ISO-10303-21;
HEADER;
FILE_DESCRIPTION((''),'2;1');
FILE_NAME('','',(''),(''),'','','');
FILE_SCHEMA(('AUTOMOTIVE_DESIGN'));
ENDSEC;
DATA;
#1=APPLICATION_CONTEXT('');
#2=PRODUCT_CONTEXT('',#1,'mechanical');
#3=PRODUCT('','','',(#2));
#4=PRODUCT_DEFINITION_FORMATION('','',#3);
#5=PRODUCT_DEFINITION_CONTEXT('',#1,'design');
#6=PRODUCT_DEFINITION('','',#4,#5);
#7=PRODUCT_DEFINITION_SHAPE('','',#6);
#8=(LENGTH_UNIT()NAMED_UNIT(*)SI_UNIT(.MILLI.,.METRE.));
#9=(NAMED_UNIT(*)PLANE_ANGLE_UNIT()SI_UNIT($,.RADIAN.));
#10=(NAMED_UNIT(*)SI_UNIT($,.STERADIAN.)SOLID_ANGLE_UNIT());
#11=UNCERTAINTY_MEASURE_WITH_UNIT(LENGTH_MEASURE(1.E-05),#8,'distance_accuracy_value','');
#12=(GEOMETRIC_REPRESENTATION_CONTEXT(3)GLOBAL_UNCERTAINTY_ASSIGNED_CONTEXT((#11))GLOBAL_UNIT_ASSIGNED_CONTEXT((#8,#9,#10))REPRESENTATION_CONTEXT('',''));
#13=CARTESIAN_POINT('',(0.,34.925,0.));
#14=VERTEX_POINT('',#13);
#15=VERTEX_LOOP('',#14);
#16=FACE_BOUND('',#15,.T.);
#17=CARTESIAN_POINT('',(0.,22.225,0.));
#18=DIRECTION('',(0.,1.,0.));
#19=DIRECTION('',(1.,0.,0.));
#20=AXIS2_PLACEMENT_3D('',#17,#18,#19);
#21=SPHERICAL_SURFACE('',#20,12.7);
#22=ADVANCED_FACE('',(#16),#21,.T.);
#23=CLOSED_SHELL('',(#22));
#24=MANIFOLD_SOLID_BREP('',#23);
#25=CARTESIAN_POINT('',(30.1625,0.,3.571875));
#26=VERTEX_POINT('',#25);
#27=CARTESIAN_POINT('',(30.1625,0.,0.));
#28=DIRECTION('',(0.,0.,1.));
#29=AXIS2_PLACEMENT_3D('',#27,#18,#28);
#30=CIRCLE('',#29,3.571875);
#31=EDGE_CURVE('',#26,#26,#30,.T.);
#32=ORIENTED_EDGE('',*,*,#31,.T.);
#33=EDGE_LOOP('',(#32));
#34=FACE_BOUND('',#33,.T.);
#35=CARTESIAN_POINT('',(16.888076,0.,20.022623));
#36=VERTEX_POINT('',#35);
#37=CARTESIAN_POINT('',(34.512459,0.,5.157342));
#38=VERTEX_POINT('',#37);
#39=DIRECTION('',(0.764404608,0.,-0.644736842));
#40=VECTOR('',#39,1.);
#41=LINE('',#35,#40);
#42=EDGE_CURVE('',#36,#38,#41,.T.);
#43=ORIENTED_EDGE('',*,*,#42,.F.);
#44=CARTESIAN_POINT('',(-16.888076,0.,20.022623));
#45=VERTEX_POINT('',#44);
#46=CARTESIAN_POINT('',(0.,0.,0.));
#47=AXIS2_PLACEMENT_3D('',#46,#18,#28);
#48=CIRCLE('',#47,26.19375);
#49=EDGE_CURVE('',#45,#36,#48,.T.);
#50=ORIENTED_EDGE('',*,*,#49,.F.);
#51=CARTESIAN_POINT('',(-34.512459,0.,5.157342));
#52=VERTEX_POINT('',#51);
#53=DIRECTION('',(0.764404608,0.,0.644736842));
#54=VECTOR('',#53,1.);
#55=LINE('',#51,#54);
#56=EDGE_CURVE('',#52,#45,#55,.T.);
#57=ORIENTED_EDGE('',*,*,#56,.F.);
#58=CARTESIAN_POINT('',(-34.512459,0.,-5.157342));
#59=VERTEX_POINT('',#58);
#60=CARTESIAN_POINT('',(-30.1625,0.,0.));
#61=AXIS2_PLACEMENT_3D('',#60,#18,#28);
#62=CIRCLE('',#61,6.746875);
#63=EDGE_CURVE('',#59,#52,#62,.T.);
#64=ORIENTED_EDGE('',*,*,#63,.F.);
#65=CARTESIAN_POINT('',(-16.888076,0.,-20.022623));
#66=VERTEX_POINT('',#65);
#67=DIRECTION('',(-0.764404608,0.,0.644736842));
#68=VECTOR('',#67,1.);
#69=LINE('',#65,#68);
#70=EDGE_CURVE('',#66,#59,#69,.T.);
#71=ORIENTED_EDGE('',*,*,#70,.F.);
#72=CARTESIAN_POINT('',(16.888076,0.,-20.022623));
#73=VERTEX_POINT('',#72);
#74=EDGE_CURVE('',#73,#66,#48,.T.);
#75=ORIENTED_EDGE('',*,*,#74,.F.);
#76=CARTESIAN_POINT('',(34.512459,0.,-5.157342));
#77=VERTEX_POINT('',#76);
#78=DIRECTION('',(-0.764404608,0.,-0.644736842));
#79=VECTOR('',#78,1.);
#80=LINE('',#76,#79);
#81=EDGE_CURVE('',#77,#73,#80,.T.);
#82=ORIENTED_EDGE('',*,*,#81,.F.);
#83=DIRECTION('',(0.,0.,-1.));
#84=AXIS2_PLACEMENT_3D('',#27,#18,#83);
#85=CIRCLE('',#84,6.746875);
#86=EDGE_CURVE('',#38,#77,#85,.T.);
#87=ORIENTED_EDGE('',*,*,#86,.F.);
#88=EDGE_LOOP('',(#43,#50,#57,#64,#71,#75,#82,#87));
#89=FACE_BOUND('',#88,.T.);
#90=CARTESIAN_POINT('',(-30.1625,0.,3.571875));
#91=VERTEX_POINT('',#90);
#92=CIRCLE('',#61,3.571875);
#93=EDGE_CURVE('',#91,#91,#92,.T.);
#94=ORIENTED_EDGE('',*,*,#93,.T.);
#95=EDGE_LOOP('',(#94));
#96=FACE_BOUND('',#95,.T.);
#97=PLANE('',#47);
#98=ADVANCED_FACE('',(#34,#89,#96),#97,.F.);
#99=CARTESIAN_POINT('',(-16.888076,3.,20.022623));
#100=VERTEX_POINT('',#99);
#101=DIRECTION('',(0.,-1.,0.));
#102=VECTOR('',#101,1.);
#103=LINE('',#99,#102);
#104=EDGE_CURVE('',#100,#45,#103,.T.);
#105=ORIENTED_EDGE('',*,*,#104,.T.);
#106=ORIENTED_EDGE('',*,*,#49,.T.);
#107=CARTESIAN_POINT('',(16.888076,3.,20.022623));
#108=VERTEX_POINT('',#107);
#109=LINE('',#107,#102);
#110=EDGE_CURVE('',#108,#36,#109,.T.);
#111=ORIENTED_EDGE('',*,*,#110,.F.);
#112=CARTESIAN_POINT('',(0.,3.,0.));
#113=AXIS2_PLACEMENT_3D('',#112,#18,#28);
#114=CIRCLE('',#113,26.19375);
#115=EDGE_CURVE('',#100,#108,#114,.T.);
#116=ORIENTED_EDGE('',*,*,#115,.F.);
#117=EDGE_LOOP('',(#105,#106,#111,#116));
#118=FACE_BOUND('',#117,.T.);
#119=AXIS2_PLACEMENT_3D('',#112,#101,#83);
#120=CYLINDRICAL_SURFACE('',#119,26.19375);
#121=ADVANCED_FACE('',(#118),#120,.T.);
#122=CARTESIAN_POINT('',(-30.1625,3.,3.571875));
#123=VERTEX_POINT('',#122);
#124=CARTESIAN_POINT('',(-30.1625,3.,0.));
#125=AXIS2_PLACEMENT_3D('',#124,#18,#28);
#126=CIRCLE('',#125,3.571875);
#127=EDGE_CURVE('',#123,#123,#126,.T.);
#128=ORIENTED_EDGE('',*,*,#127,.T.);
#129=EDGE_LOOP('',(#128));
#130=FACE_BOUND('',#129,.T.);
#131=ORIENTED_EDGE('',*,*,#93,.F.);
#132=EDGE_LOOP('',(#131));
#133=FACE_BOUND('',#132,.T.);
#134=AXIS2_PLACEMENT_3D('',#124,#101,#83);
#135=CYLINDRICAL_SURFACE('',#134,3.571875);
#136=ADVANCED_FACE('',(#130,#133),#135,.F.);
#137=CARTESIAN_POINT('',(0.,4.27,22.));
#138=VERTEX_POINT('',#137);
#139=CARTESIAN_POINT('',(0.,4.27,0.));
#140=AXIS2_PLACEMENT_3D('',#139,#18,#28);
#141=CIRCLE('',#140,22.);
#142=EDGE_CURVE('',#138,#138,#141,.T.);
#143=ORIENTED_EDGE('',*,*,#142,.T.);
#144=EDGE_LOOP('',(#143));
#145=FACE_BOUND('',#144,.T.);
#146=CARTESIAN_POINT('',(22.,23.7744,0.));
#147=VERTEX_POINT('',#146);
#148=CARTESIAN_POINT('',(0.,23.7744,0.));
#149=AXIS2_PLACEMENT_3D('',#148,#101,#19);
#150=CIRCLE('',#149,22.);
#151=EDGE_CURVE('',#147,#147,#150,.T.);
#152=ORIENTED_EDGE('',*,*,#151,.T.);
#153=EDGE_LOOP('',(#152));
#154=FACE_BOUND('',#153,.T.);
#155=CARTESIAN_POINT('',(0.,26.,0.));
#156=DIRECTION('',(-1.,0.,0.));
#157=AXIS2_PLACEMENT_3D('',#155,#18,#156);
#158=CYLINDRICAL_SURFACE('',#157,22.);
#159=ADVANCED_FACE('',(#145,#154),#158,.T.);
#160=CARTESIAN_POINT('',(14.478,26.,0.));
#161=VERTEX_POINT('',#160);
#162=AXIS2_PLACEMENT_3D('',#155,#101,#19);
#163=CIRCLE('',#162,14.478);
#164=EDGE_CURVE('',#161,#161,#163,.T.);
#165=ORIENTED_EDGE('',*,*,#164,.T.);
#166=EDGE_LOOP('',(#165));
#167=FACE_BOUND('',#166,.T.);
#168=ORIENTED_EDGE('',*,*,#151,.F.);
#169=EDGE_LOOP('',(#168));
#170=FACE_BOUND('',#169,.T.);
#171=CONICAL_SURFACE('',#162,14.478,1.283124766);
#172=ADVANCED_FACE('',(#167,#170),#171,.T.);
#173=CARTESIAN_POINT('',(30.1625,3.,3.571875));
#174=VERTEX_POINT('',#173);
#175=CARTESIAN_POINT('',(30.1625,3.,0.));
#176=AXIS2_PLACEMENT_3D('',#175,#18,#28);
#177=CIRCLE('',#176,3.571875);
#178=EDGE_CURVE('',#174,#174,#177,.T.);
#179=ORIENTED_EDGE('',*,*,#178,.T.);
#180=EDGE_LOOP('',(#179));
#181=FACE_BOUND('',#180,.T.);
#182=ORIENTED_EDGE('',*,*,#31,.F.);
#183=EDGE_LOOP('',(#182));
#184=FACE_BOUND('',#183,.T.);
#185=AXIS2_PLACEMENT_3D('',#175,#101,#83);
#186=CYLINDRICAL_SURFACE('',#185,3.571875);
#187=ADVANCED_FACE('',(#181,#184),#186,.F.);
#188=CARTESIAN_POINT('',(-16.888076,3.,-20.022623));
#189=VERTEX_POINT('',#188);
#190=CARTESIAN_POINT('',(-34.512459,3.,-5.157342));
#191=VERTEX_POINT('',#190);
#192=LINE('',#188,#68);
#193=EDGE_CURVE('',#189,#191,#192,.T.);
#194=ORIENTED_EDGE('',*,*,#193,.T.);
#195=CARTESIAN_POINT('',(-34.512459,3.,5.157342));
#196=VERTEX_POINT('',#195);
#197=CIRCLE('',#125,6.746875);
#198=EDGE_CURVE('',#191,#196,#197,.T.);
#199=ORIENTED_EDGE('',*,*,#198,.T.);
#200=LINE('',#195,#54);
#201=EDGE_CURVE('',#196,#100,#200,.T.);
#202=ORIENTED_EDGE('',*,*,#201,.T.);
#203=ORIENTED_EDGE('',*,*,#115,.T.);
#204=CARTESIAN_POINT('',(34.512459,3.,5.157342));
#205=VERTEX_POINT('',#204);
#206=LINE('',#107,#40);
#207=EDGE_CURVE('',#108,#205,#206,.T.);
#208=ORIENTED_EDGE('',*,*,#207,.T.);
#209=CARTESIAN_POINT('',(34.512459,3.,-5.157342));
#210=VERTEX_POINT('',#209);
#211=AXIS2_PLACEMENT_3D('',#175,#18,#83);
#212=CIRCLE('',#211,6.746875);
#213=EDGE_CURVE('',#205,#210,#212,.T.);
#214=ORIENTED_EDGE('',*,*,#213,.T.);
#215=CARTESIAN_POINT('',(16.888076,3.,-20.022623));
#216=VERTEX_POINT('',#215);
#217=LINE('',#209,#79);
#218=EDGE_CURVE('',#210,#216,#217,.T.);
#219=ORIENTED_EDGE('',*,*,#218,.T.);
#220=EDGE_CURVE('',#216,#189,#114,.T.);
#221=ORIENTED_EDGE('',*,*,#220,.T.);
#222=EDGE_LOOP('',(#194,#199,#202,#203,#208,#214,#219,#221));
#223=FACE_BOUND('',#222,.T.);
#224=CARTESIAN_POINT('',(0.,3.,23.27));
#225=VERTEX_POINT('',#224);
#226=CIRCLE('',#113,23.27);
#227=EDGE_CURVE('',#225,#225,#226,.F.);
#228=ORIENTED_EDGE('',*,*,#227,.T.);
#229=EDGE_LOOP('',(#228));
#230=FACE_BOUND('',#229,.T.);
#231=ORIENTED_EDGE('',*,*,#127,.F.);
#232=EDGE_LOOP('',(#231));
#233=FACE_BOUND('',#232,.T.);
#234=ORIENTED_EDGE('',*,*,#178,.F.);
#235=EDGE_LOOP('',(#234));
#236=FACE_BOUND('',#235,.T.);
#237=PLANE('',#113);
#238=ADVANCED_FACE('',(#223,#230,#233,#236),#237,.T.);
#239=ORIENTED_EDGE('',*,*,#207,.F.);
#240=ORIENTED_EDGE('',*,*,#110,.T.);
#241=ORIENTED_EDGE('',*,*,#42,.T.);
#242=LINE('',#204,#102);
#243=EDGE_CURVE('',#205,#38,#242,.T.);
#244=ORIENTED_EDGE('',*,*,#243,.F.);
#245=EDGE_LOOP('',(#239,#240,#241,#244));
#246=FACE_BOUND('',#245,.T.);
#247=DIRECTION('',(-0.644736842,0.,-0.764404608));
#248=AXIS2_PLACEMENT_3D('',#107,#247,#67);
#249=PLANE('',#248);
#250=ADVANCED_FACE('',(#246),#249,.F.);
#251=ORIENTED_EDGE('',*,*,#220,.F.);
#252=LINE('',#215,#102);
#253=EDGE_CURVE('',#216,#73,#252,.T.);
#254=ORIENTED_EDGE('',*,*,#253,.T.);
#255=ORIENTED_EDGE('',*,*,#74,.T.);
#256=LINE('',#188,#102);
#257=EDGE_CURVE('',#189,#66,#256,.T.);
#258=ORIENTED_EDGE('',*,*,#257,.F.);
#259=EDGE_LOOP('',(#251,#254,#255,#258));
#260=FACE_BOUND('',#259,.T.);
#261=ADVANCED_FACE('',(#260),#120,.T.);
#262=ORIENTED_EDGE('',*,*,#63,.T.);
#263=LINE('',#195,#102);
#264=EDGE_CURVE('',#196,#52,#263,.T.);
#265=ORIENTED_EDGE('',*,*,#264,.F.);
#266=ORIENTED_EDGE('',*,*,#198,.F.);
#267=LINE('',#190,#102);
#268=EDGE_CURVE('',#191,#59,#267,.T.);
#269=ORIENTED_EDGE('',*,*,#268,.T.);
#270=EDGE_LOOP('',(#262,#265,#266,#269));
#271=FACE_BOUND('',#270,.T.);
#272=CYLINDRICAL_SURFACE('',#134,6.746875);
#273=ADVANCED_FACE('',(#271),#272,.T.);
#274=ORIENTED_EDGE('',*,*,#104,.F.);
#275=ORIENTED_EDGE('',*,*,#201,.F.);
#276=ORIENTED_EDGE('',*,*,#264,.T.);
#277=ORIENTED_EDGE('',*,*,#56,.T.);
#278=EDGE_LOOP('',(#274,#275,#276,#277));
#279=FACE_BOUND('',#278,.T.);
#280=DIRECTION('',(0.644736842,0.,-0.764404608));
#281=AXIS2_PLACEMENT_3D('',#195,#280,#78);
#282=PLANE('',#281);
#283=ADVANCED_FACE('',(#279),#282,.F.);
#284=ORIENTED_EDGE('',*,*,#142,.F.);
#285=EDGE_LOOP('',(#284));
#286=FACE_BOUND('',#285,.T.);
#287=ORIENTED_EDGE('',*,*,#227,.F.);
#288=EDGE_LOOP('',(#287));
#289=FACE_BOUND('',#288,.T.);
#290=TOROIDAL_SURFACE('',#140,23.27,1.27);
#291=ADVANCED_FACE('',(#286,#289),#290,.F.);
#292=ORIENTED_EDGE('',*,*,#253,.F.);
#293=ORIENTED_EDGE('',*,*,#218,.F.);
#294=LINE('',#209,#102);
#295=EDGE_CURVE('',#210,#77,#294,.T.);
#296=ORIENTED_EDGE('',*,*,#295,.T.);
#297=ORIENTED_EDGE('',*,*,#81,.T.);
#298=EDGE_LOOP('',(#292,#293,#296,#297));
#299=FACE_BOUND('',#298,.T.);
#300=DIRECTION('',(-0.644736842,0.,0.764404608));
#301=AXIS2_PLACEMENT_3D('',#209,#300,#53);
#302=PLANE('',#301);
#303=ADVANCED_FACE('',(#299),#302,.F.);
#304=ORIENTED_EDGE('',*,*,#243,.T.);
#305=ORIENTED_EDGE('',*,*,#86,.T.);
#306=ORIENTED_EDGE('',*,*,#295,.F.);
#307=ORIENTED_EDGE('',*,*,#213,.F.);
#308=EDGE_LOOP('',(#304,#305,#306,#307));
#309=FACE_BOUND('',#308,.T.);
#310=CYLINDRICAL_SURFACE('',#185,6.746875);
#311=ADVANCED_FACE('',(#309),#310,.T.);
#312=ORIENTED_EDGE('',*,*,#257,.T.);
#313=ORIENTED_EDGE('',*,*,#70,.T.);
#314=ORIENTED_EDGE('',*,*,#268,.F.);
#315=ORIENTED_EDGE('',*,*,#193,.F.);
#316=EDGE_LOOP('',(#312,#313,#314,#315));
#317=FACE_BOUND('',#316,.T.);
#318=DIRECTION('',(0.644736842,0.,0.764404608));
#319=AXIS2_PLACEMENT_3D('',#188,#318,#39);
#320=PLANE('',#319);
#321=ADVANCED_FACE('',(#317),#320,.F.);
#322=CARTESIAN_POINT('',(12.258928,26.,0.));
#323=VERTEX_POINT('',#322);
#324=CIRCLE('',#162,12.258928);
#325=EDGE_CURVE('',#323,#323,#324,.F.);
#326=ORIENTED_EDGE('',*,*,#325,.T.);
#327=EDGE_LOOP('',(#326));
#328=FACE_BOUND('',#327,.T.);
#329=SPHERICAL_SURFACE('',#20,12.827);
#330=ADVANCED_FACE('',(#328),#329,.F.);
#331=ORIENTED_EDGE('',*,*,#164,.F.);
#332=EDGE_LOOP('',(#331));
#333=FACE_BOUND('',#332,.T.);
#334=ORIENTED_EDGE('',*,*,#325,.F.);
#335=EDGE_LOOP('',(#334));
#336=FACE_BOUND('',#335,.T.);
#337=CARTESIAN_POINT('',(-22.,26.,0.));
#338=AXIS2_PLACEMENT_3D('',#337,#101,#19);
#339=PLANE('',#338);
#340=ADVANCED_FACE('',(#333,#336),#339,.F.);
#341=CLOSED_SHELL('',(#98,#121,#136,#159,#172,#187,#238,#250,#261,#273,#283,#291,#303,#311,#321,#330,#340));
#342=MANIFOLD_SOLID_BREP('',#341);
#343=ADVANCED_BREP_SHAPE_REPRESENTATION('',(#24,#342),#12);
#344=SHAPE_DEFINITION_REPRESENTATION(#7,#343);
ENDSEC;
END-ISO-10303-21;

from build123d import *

# Parameters (mm, degrees)
SKETCH2_R           = 3.571875
BOSS_EXTRUDE1_DEPTH = 3
SKETCH1_W           = 22
SKETCH1_H           = 26
FILLET1_R           = 1.27


# Read off the part's stored shape, not the designer's step: Move Face1
with BuildPart() as part:
    # Sketch2 → Boss-Extrude1 (new body)
    with BuildSketch(Plane(origin=(0, 0, 0), x_dir=(1, 0, 0), z_dir=(0, 1, 0))):
        with BuildLine():
            Line((-16.888075658, 20.022623196), (-34.512458882, 5.157342338))
            ThreePointArc((-34.512458882, 5.157342338), (-36.909375, 0), (-34.512458882, -5.157342338))
            Line((-34.512458882, -5.157342338), (-16.888075658, -20.022623196))
            ThreePointArc((-16.888075658, -20.022623196), (0, -26.19375), (16.888075658, -20.022623196))
            Line((16.888075658, -20.022623196), (34.512458882, -5.157342338))
            ThreePointArc((34.512458882, -5.157342338), (36.909375, 0), (34.512458882, 5.157342338))
            Line((34.512458882, 5.157342338), (16.888075658, 20.022623196))
            ThreePointArc((16.888075658, 20.022623196), (0, 26.19375), (-16.888075658, 20.022623196))
        make_face()
        with Locations(Location((-30.1625, 0, 0), (0, 0, 270))):
            Circle(SKETCH2_R, mode=Mode.SUBTRACT)
        with Locations(Location((30.1625, 0, 0), (0, 0, 270))):
            Circle(SKETCH2_R, mode=Mode.SUBTRACT)
    extrude(amount=BOSS_EXTRUDE1_DEPTH)

    # Sketch1 → Revolve1 (revolve)
    with BuildSketch(Plane.XY, mode=Mode.PRIVATE) as revolve1_sk:
        with Locations((11, 13)):
            Rectangle(SKETCH1_W, SKETCH1_H)
    revolve(revolve1_sk.sketch.rotate(Axis((0, 26, 0), (0, -1, 0)), 180), axis=Axis((0, 26, 0), (0, -1, 0)))

    # Sketch3<2> → Cut-Revolve1 (revolve, cut)
    with BuildSketch(Plane.XY):
        with BuildLine():
            Line((0, 34.925), (0, 9.525))
            ThreePointArc((0, 9.525), (12.7, 22.225), (0, 34.925))
        make_face()
    revolve(axis=Axis((0, 34.925, 0), (0, -1, 0)), mode=Mode.SUBTRACT)

    # Move Face1 outline → Move Face1 (revolve, cut)
    with BuildSketch(Plane.XY):
        with BuildLine():
            Line((0, 9.525), (0, 9.398))
            ThreePointArc((0, 9.398), (10.318765773, 14.605616697), (12.258927519, 26.000000012))
            Line((12.258927519, 26.000000012), (12.125979338, 26.000000012))
            ThreePointArc((12.125979338, 26.000000012), (10.228208547, 14.69680301), (0, 9.525))
        make_face()
    revolve(axis=Axis((0, 0, 0), (0, 1, 0)), mode=Mode.SUBTRACT)

    # Fillet1
    fillet1_edges = [part.edges().sort_by_distance(p)[0] for p in [
        (22, 3, 0),
    ]]
    fillet(fillet1_edges, radius=FILLET1_R)

    # Sketch4 → Cut-Revolve2 (revolve, cut)
    with BuildSketch(Plane.XY):
        Polygon((22, 23.7744), (14.478, 26), (22, 26), align=None)
    revolve(axis=Axis((0, 26, 0), (0, 1, 0)), mode=Mode.SUBTRACT)


with BuildPart() as body_2:
    # Sketch3 → Revolve2 (revolve)
    with BuildSketch(Plane.XY):
        with BuildLine():
            Line((0, 34.925), (0, 9.525))
            ThreePointArc((0, 9.525), (12.7, 22.225), (0, 34.925))
        make_face()
    revolve(axis=Axis((0, 34.925, 0), (0, -1, 0)))


solid = Compound([part.part, body_2.part])
